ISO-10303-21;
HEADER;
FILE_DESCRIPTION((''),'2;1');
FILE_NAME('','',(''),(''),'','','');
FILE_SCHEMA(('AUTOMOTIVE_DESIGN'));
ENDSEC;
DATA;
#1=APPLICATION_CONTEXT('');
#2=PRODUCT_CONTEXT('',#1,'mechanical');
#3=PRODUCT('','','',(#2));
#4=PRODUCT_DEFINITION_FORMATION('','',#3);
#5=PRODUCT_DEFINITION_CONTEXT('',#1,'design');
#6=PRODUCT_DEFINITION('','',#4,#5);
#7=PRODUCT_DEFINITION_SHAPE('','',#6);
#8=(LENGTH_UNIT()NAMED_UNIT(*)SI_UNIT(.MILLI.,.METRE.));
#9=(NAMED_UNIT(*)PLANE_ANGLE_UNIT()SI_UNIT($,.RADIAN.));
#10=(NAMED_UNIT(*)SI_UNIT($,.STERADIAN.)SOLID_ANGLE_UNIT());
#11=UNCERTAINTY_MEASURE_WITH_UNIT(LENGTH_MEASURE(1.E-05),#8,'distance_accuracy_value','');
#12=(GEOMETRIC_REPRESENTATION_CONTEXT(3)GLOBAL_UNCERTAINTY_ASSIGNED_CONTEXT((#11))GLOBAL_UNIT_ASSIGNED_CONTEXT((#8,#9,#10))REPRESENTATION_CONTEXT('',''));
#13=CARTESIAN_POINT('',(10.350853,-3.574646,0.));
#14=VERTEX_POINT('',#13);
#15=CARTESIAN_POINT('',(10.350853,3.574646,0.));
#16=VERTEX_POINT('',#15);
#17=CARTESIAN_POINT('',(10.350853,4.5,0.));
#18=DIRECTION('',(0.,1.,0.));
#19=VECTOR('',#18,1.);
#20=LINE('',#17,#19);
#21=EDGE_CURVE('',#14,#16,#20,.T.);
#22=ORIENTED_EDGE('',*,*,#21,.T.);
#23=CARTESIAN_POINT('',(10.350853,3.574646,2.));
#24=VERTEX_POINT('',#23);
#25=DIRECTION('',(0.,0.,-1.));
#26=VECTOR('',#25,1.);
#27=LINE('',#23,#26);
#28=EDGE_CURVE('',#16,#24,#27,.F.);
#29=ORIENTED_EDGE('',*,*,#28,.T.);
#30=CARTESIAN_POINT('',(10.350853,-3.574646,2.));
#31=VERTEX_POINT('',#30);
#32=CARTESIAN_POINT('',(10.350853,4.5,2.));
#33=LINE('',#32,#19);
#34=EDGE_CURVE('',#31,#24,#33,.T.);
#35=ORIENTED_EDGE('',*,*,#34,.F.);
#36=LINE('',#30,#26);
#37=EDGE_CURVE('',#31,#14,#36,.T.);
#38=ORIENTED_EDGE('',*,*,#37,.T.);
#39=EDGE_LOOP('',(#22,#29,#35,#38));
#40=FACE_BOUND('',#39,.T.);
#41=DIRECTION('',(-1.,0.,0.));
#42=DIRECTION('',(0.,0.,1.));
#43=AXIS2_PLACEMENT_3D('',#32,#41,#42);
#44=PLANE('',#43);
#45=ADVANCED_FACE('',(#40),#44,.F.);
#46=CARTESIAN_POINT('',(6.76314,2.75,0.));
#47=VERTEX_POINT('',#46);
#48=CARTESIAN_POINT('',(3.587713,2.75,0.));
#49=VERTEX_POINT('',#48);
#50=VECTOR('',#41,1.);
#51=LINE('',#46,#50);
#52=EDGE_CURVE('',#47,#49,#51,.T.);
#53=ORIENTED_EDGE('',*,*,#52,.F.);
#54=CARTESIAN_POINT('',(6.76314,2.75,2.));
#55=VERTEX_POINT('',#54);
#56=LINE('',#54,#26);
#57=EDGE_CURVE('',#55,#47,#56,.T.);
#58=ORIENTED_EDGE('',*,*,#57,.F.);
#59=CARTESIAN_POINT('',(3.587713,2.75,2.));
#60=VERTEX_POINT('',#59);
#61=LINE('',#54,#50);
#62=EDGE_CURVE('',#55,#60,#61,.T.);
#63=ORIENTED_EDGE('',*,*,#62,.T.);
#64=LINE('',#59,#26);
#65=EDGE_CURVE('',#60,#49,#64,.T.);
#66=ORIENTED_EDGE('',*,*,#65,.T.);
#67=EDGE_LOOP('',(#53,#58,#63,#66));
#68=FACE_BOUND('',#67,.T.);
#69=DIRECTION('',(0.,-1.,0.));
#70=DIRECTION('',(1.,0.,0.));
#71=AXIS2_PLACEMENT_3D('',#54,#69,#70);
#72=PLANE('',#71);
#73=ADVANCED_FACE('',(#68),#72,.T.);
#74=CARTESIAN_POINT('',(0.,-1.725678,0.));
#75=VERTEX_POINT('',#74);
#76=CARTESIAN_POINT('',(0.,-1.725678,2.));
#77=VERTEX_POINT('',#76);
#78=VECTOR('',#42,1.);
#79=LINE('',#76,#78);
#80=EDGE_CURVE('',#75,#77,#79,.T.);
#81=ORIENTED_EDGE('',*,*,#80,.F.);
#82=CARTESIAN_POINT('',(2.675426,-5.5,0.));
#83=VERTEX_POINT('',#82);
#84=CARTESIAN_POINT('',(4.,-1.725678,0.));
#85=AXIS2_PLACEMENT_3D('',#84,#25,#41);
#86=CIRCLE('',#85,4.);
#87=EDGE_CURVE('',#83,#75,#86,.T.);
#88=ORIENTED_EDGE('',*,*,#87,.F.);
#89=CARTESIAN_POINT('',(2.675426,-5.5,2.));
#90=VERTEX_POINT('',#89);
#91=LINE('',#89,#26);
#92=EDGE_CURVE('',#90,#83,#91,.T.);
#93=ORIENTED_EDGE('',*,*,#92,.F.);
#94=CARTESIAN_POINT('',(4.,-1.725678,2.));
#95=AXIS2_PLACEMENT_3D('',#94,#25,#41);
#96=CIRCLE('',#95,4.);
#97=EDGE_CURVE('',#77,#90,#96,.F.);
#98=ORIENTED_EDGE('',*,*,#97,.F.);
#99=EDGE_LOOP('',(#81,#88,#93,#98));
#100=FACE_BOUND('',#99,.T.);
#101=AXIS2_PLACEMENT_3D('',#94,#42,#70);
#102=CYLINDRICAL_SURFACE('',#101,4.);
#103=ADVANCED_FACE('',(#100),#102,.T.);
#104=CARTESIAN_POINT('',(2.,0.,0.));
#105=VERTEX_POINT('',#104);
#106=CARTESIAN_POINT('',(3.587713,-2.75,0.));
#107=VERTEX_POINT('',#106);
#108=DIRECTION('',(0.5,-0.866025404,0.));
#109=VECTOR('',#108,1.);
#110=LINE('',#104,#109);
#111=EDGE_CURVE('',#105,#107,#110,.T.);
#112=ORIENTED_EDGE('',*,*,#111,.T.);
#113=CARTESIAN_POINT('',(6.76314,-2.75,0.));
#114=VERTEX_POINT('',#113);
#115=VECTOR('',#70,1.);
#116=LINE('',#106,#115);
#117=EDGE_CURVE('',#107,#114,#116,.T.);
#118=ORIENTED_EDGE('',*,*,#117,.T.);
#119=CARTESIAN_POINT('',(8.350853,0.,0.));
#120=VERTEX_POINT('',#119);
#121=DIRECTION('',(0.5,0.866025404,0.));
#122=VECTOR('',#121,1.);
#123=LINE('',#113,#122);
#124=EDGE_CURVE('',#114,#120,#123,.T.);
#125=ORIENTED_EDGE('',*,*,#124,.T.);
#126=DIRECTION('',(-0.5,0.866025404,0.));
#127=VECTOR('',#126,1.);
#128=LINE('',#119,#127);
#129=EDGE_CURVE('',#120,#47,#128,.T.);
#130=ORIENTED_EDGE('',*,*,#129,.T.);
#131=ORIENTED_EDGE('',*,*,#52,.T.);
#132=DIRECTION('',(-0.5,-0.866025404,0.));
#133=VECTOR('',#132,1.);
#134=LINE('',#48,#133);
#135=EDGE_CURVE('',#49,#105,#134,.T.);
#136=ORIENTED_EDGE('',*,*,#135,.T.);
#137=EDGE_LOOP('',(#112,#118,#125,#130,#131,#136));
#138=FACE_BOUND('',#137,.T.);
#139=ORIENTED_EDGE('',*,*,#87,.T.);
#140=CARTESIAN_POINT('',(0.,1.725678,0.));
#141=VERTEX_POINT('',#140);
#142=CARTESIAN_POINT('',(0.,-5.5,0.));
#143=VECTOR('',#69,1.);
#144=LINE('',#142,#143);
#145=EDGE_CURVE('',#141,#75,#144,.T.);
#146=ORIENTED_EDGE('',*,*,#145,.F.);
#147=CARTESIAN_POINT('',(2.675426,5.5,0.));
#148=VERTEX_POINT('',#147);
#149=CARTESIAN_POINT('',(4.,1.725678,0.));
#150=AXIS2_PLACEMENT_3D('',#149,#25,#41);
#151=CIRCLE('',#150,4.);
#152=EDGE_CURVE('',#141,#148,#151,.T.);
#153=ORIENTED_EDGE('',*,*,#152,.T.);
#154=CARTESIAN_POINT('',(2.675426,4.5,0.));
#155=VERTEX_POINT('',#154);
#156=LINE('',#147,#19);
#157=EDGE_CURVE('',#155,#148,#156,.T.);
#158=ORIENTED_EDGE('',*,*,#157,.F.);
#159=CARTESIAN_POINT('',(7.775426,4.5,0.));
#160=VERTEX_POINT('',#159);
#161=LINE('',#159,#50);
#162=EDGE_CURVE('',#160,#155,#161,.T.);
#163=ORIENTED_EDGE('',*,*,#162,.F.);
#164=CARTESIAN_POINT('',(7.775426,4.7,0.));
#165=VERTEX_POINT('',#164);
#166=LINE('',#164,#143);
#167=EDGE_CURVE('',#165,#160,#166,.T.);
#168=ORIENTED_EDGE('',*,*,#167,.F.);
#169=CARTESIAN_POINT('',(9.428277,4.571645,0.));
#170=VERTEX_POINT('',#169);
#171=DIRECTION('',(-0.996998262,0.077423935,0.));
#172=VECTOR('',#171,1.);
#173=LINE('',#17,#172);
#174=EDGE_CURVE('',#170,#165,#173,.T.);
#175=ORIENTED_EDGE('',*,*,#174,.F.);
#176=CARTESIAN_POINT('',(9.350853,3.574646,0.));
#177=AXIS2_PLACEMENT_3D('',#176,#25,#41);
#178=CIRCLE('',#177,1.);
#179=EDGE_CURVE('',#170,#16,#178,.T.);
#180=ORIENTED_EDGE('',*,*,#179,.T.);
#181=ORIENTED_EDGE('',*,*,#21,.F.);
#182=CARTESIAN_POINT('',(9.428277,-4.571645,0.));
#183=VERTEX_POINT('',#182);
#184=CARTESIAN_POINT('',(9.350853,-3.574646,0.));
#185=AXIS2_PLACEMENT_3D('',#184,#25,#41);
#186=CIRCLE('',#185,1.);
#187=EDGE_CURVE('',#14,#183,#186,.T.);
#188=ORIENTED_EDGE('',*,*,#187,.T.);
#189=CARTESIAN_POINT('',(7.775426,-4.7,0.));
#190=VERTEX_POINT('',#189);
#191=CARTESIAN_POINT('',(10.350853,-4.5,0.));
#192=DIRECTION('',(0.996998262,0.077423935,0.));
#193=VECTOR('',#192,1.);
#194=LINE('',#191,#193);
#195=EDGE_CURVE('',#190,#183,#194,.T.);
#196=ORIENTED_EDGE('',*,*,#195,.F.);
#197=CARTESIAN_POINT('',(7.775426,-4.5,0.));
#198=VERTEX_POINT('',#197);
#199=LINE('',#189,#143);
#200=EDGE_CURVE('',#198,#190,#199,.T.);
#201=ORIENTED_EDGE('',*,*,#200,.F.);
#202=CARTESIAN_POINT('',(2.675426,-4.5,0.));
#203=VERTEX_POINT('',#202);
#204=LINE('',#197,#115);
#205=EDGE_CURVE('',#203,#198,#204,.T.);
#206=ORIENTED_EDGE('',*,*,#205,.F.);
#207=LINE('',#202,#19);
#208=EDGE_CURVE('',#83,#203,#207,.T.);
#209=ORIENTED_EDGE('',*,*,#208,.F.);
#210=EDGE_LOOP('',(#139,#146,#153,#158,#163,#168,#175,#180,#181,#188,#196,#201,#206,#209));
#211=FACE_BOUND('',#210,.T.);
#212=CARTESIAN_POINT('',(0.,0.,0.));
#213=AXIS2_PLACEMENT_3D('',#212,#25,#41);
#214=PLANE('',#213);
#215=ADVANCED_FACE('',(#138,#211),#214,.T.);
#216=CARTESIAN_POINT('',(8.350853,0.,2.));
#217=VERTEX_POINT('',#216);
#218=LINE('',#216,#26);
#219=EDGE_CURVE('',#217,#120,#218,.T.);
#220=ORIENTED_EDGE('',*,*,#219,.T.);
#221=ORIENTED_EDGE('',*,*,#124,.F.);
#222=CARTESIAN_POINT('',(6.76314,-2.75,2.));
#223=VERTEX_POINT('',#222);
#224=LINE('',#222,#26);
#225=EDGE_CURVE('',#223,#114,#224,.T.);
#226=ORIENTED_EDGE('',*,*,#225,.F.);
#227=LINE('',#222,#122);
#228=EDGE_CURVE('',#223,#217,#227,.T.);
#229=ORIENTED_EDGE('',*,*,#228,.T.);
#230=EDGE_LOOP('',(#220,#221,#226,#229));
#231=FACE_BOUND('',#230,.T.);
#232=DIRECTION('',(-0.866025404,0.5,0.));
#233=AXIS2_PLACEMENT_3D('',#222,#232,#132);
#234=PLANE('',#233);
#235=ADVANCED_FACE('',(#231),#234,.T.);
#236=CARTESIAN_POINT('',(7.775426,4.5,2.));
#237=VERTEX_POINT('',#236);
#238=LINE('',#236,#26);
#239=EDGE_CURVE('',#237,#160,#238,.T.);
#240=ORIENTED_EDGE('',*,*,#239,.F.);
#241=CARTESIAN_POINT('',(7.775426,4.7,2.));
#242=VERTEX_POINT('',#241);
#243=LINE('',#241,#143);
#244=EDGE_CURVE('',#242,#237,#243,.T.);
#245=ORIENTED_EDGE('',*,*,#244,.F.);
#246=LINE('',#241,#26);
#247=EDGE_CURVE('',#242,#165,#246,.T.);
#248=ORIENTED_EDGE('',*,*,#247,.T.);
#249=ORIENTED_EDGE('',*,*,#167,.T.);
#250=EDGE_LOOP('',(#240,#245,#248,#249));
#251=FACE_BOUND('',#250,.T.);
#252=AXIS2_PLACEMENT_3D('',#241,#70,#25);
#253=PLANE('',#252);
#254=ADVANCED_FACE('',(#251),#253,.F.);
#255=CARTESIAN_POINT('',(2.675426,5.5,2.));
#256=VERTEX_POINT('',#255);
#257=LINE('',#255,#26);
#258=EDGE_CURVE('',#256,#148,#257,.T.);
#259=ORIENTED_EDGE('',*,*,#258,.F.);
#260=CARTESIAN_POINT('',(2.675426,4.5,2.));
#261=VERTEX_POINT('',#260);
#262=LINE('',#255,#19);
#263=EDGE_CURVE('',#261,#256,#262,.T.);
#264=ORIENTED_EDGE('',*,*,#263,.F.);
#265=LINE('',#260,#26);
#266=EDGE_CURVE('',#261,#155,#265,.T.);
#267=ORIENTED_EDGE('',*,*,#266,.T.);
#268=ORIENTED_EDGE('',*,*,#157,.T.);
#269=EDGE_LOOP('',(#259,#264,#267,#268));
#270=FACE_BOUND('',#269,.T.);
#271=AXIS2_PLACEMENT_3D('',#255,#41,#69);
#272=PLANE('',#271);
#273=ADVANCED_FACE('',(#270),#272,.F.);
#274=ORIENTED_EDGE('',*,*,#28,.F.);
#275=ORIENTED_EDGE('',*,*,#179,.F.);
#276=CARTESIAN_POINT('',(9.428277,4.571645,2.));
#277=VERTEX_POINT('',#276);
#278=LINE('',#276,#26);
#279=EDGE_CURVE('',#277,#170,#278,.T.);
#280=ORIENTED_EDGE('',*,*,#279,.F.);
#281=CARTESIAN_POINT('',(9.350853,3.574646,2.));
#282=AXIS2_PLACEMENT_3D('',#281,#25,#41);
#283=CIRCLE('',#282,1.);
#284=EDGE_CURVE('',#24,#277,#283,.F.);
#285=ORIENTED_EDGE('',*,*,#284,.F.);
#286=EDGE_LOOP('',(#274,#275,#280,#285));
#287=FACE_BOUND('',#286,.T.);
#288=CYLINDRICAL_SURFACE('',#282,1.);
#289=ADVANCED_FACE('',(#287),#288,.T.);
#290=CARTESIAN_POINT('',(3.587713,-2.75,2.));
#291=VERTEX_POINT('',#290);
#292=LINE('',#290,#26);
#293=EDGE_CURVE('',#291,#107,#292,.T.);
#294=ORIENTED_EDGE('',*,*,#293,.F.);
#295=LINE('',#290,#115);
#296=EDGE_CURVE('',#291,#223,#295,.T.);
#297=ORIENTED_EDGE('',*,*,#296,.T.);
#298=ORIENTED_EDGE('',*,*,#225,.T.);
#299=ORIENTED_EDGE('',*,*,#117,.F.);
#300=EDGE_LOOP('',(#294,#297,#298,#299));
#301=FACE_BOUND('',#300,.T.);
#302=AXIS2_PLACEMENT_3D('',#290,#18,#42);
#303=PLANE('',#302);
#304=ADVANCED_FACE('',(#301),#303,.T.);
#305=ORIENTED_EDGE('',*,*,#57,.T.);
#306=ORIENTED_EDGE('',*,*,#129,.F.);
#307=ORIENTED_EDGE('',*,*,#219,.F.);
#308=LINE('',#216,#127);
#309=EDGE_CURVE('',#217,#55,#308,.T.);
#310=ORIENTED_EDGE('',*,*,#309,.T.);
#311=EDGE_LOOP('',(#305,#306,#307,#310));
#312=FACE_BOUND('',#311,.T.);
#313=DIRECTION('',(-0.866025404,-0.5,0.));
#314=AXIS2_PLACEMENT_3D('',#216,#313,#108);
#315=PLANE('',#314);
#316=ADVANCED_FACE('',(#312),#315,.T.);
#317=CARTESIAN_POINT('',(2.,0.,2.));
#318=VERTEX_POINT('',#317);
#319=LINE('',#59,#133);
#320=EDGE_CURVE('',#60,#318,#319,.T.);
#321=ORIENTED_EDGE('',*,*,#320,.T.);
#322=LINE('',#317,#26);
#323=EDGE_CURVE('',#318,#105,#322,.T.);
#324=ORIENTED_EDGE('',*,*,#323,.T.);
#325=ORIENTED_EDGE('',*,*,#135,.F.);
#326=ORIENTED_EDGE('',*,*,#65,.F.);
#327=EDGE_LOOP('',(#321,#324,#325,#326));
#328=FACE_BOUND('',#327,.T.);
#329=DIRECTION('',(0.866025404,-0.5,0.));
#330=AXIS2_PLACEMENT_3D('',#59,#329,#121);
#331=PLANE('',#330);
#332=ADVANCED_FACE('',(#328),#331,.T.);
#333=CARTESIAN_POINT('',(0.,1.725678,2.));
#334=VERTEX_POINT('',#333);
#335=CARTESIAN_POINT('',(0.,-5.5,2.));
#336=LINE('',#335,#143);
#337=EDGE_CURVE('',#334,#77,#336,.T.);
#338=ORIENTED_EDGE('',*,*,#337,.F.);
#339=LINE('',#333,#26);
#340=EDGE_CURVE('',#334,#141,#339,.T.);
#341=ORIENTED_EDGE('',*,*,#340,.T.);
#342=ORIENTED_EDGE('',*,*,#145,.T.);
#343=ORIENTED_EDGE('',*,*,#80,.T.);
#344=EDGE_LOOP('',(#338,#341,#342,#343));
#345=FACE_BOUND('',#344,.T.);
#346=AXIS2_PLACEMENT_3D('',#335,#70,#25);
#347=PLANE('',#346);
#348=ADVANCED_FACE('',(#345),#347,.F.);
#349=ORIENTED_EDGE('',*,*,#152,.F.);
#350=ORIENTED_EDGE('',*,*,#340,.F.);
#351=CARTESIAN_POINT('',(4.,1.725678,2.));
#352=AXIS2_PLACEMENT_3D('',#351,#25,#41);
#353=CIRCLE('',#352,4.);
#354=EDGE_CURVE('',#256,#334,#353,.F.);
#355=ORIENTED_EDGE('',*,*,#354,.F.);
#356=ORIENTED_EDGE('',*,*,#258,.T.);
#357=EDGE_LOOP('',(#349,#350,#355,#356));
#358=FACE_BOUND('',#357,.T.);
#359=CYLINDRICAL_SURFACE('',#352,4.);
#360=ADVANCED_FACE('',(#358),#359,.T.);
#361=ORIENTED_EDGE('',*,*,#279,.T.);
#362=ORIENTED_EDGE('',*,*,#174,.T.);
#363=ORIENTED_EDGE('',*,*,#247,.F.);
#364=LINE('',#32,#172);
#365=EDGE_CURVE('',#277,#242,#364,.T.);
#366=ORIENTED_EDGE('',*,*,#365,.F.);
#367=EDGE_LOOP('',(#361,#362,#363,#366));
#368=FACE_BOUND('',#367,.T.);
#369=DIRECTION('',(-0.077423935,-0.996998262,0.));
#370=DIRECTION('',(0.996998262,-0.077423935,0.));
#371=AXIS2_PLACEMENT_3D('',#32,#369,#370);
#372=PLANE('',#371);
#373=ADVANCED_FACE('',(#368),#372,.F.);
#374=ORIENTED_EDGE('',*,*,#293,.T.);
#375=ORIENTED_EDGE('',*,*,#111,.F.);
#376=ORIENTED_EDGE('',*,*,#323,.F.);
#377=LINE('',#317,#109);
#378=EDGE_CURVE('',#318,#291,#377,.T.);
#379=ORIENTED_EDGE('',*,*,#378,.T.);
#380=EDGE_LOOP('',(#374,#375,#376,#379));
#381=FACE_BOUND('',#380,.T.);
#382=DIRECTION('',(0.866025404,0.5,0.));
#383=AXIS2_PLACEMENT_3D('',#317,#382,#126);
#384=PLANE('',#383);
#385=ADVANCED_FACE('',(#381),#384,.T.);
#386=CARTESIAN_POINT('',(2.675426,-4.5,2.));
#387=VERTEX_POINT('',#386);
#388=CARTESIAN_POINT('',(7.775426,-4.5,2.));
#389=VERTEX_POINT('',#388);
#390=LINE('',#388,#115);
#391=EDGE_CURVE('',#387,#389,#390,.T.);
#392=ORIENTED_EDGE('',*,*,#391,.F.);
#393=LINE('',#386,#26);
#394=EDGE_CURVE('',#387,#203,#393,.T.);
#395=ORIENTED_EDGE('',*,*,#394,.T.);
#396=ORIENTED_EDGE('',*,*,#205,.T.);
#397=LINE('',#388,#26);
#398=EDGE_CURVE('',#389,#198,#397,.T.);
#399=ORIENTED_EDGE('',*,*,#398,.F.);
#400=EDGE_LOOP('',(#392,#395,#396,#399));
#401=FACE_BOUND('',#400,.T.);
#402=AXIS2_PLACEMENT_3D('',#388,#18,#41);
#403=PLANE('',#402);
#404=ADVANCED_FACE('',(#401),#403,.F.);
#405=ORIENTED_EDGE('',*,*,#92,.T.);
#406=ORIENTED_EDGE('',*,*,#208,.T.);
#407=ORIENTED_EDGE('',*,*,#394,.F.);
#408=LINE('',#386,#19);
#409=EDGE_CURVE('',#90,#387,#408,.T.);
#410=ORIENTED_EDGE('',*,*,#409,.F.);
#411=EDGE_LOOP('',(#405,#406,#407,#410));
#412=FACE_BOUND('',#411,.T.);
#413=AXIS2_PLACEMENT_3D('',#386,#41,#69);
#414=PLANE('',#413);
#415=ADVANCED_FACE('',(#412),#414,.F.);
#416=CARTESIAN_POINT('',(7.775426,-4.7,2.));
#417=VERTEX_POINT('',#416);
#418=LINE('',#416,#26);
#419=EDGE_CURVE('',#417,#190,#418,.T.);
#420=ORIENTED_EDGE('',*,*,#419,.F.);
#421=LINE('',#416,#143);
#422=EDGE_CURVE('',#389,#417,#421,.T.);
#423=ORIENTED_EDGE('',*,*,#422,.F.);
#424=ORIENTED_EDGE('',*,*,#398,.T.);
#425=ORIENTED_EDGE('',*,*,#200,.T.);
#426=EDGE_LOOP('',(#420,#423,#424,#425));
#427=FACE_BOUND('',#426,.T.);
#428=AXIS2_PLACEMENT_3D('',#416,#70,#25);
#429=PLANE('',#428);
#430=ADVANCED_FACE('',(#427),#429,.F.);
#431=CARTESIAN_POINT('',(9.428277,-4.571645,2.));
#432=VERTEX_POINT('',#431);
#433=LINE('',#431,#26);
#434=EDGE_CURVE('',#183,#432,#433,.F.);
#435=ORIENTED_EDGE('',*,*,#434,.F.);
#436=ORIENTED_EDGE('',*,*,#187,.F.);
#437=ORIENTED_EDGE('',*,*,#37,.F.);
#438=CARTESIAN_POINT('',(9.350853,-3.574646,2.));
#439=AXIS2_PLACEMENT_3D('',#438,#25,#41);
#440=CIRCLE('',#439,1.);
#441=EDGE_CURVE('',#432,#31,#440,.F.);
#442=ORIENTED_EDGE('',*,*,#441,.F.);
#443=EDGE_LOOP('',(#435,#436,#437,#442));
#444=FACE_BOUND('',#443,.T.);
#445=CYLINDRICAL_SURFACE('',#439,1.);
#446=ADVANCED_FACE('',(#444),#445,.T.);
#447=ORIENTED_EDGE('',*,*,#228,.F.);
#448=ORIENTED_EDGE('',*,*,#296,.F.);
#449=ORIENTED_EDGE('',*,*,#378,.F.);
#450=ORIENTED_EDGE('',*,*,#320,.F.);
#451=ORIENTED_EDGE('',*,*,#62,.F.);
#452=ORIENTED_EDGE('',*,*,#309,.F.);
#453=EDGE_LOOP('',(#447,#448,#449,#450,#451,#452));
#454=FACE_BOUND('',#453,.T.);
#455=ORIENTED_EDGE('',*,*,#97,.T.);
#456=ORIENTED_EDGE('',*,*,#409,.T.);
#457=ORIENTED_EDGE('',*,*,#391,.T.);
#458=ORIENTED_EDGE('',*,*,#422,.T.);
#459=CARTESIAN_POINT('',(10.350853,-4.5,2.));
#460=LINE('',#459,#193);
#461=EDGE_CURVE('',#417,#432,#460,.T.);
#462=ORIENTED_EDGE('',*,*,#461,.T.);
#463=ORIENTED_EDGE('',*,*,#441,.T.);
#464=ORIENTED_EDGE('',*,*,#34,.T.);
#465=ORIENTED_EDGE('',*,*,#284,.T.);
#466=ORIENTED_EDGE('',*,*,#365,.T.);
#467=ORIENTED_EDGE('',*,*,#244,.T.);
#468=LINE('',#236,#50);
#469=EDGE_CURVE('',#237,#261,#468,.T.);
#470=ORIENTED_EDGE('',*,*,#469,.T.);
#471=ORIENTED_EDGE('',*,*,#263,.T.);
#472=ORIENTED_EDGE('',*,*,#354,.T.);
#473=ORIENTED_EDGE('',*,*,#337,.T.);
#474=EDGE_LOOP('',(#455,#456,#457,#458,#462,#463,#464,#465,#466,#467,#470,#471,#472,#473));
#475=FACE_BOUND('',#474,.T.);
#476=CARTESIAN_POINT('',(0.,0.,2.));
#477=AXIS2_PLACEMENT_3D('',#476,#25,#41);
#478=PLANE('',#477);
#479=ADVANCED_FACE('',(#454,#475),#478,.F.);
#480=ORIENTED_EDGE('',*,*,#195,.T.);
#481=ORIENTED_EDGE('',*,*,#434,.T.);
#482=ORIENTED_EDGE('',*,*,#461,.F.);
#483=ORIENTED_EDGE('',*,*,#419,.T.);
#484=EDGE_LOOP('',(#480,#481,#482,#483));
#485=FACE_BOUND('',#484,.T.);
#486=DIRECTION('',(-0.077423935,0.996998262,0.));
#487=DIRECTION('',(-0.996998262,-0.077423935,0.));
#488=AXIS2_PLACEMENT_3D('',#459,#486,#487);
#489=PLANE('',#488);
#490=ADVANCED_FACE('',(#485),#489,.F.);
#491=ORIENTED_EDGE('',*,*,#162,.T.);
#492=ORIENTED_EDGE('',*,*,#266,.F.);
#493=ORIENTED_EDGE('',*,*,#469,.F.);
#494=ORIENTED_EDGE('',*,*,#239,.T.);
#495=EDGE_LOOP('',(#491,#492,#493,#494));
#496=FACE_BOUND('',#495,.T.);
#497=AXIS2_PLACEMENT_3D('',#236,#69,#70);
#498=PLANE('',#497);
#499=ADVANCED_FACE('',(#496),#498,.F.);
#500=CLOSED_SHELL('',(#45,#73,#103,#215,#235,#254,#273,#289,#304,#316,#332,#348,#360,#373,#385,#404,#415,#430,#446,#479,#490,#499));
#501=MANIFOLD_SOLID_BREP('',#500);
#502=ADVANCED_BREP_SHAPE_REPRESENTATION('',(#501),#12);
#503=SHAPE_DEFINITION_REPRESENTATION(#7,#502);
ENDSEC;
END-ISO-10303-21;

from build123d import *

# Parameters (mm, degrees)
BOSS_EXTRU_1_DEPTH = 2
CONG_1_R           = 4
CONG_2_R           = 1


with BuildPart() as part:
    # Esquisse1 → Boss.-Extru.1 (new body)
    with BuildSketch(Plane.XY):
        Polygon((0, 5.5), (2.675426481, 5.5), (2.675426481, 4.5), (7.775426481, 4.5), (7.775426481, 4.7), (10.350852961, 4.5), (10.350852961, -4.5), (7.775426481, -4.7), (7.775426481, -4.5), (2.675426481, -4.5), (2.675426481, -5.5), (0, -5.5), align=None)
        Polygon((2, 0), (3.58771324, -2.75), (6.763139721, -2.75), (8.350852961, 0), (6.763139721, 2.75), (3.58771324, 2.75), align=None, mode=Mode.SUBTRACT)
    extrude(amount=BOSS_EXTRU_1_DEPTH)

    # Congé1
    # the kernel refuses this fillet: 4 mm, written as the material it takes off along each edge
    with BuildSketch(Plane(origin=(0, -5.5, -9.435804481), x_dir=(1, 0, 0), z_dir=(0, 0, 1))) as cong_1_piece_1:
        with BuildLine():
            CenterArc((4, 3.774321792), CONG_1_R, 180, 70.661811314)
            Line((0, 3.774321792), (-0.08, 3.774321792))
            Line((-0.08, 3.774321792), (-0.08, 0))
            Line((-0.08, 0), (0, -0.08))
            ThreePointArc((0, -0.08), (1.33771324, -0.08), (2.64893501, -0.075486436))
            Line((2.64893501, -0.075486436), (2.675426481, 0))
        make_face()
    extrude(amount=20.871608961, mode=Mode.SUBTRACT)
    with BuildSketch(Plane(origin=(0, 5.5, -9.435804481), x_dir=(1, 0, 0), z_dir=(0, 0, 1))) as cong_1_piece_2:
        with BuildLine():
            CenterArc((4, -3.774321792), CONG_1_R, 109.338188686, 70.661811314)
            Line((0, -3.774321792), (-0.08, -3.774321792))
            Line((-0.08, -3.774321792), (-0.08, 0))
            Line((-0.08, 0), (0, 0.08))
            ThreePointArc((0, 0.08), (1.33771324, 0.08), (2.64893501, 0.075486436))
            Line((2.64893501, 0.075486436), (2.675426481, 0))
        make_face()
    extrude(amount=20.871608961, mode=Mode.SUBTRACT)

    # Congé2
    cong_2_edges = [part.edges().sort_by_distance(p)[0] for p in [
        (10.350852961, 4.5, 1),
        (10.350852961, -4.5, 1),
    ]]
    fillet(cong_2_edges, radius=CONG_2_R)


solid = part.part
